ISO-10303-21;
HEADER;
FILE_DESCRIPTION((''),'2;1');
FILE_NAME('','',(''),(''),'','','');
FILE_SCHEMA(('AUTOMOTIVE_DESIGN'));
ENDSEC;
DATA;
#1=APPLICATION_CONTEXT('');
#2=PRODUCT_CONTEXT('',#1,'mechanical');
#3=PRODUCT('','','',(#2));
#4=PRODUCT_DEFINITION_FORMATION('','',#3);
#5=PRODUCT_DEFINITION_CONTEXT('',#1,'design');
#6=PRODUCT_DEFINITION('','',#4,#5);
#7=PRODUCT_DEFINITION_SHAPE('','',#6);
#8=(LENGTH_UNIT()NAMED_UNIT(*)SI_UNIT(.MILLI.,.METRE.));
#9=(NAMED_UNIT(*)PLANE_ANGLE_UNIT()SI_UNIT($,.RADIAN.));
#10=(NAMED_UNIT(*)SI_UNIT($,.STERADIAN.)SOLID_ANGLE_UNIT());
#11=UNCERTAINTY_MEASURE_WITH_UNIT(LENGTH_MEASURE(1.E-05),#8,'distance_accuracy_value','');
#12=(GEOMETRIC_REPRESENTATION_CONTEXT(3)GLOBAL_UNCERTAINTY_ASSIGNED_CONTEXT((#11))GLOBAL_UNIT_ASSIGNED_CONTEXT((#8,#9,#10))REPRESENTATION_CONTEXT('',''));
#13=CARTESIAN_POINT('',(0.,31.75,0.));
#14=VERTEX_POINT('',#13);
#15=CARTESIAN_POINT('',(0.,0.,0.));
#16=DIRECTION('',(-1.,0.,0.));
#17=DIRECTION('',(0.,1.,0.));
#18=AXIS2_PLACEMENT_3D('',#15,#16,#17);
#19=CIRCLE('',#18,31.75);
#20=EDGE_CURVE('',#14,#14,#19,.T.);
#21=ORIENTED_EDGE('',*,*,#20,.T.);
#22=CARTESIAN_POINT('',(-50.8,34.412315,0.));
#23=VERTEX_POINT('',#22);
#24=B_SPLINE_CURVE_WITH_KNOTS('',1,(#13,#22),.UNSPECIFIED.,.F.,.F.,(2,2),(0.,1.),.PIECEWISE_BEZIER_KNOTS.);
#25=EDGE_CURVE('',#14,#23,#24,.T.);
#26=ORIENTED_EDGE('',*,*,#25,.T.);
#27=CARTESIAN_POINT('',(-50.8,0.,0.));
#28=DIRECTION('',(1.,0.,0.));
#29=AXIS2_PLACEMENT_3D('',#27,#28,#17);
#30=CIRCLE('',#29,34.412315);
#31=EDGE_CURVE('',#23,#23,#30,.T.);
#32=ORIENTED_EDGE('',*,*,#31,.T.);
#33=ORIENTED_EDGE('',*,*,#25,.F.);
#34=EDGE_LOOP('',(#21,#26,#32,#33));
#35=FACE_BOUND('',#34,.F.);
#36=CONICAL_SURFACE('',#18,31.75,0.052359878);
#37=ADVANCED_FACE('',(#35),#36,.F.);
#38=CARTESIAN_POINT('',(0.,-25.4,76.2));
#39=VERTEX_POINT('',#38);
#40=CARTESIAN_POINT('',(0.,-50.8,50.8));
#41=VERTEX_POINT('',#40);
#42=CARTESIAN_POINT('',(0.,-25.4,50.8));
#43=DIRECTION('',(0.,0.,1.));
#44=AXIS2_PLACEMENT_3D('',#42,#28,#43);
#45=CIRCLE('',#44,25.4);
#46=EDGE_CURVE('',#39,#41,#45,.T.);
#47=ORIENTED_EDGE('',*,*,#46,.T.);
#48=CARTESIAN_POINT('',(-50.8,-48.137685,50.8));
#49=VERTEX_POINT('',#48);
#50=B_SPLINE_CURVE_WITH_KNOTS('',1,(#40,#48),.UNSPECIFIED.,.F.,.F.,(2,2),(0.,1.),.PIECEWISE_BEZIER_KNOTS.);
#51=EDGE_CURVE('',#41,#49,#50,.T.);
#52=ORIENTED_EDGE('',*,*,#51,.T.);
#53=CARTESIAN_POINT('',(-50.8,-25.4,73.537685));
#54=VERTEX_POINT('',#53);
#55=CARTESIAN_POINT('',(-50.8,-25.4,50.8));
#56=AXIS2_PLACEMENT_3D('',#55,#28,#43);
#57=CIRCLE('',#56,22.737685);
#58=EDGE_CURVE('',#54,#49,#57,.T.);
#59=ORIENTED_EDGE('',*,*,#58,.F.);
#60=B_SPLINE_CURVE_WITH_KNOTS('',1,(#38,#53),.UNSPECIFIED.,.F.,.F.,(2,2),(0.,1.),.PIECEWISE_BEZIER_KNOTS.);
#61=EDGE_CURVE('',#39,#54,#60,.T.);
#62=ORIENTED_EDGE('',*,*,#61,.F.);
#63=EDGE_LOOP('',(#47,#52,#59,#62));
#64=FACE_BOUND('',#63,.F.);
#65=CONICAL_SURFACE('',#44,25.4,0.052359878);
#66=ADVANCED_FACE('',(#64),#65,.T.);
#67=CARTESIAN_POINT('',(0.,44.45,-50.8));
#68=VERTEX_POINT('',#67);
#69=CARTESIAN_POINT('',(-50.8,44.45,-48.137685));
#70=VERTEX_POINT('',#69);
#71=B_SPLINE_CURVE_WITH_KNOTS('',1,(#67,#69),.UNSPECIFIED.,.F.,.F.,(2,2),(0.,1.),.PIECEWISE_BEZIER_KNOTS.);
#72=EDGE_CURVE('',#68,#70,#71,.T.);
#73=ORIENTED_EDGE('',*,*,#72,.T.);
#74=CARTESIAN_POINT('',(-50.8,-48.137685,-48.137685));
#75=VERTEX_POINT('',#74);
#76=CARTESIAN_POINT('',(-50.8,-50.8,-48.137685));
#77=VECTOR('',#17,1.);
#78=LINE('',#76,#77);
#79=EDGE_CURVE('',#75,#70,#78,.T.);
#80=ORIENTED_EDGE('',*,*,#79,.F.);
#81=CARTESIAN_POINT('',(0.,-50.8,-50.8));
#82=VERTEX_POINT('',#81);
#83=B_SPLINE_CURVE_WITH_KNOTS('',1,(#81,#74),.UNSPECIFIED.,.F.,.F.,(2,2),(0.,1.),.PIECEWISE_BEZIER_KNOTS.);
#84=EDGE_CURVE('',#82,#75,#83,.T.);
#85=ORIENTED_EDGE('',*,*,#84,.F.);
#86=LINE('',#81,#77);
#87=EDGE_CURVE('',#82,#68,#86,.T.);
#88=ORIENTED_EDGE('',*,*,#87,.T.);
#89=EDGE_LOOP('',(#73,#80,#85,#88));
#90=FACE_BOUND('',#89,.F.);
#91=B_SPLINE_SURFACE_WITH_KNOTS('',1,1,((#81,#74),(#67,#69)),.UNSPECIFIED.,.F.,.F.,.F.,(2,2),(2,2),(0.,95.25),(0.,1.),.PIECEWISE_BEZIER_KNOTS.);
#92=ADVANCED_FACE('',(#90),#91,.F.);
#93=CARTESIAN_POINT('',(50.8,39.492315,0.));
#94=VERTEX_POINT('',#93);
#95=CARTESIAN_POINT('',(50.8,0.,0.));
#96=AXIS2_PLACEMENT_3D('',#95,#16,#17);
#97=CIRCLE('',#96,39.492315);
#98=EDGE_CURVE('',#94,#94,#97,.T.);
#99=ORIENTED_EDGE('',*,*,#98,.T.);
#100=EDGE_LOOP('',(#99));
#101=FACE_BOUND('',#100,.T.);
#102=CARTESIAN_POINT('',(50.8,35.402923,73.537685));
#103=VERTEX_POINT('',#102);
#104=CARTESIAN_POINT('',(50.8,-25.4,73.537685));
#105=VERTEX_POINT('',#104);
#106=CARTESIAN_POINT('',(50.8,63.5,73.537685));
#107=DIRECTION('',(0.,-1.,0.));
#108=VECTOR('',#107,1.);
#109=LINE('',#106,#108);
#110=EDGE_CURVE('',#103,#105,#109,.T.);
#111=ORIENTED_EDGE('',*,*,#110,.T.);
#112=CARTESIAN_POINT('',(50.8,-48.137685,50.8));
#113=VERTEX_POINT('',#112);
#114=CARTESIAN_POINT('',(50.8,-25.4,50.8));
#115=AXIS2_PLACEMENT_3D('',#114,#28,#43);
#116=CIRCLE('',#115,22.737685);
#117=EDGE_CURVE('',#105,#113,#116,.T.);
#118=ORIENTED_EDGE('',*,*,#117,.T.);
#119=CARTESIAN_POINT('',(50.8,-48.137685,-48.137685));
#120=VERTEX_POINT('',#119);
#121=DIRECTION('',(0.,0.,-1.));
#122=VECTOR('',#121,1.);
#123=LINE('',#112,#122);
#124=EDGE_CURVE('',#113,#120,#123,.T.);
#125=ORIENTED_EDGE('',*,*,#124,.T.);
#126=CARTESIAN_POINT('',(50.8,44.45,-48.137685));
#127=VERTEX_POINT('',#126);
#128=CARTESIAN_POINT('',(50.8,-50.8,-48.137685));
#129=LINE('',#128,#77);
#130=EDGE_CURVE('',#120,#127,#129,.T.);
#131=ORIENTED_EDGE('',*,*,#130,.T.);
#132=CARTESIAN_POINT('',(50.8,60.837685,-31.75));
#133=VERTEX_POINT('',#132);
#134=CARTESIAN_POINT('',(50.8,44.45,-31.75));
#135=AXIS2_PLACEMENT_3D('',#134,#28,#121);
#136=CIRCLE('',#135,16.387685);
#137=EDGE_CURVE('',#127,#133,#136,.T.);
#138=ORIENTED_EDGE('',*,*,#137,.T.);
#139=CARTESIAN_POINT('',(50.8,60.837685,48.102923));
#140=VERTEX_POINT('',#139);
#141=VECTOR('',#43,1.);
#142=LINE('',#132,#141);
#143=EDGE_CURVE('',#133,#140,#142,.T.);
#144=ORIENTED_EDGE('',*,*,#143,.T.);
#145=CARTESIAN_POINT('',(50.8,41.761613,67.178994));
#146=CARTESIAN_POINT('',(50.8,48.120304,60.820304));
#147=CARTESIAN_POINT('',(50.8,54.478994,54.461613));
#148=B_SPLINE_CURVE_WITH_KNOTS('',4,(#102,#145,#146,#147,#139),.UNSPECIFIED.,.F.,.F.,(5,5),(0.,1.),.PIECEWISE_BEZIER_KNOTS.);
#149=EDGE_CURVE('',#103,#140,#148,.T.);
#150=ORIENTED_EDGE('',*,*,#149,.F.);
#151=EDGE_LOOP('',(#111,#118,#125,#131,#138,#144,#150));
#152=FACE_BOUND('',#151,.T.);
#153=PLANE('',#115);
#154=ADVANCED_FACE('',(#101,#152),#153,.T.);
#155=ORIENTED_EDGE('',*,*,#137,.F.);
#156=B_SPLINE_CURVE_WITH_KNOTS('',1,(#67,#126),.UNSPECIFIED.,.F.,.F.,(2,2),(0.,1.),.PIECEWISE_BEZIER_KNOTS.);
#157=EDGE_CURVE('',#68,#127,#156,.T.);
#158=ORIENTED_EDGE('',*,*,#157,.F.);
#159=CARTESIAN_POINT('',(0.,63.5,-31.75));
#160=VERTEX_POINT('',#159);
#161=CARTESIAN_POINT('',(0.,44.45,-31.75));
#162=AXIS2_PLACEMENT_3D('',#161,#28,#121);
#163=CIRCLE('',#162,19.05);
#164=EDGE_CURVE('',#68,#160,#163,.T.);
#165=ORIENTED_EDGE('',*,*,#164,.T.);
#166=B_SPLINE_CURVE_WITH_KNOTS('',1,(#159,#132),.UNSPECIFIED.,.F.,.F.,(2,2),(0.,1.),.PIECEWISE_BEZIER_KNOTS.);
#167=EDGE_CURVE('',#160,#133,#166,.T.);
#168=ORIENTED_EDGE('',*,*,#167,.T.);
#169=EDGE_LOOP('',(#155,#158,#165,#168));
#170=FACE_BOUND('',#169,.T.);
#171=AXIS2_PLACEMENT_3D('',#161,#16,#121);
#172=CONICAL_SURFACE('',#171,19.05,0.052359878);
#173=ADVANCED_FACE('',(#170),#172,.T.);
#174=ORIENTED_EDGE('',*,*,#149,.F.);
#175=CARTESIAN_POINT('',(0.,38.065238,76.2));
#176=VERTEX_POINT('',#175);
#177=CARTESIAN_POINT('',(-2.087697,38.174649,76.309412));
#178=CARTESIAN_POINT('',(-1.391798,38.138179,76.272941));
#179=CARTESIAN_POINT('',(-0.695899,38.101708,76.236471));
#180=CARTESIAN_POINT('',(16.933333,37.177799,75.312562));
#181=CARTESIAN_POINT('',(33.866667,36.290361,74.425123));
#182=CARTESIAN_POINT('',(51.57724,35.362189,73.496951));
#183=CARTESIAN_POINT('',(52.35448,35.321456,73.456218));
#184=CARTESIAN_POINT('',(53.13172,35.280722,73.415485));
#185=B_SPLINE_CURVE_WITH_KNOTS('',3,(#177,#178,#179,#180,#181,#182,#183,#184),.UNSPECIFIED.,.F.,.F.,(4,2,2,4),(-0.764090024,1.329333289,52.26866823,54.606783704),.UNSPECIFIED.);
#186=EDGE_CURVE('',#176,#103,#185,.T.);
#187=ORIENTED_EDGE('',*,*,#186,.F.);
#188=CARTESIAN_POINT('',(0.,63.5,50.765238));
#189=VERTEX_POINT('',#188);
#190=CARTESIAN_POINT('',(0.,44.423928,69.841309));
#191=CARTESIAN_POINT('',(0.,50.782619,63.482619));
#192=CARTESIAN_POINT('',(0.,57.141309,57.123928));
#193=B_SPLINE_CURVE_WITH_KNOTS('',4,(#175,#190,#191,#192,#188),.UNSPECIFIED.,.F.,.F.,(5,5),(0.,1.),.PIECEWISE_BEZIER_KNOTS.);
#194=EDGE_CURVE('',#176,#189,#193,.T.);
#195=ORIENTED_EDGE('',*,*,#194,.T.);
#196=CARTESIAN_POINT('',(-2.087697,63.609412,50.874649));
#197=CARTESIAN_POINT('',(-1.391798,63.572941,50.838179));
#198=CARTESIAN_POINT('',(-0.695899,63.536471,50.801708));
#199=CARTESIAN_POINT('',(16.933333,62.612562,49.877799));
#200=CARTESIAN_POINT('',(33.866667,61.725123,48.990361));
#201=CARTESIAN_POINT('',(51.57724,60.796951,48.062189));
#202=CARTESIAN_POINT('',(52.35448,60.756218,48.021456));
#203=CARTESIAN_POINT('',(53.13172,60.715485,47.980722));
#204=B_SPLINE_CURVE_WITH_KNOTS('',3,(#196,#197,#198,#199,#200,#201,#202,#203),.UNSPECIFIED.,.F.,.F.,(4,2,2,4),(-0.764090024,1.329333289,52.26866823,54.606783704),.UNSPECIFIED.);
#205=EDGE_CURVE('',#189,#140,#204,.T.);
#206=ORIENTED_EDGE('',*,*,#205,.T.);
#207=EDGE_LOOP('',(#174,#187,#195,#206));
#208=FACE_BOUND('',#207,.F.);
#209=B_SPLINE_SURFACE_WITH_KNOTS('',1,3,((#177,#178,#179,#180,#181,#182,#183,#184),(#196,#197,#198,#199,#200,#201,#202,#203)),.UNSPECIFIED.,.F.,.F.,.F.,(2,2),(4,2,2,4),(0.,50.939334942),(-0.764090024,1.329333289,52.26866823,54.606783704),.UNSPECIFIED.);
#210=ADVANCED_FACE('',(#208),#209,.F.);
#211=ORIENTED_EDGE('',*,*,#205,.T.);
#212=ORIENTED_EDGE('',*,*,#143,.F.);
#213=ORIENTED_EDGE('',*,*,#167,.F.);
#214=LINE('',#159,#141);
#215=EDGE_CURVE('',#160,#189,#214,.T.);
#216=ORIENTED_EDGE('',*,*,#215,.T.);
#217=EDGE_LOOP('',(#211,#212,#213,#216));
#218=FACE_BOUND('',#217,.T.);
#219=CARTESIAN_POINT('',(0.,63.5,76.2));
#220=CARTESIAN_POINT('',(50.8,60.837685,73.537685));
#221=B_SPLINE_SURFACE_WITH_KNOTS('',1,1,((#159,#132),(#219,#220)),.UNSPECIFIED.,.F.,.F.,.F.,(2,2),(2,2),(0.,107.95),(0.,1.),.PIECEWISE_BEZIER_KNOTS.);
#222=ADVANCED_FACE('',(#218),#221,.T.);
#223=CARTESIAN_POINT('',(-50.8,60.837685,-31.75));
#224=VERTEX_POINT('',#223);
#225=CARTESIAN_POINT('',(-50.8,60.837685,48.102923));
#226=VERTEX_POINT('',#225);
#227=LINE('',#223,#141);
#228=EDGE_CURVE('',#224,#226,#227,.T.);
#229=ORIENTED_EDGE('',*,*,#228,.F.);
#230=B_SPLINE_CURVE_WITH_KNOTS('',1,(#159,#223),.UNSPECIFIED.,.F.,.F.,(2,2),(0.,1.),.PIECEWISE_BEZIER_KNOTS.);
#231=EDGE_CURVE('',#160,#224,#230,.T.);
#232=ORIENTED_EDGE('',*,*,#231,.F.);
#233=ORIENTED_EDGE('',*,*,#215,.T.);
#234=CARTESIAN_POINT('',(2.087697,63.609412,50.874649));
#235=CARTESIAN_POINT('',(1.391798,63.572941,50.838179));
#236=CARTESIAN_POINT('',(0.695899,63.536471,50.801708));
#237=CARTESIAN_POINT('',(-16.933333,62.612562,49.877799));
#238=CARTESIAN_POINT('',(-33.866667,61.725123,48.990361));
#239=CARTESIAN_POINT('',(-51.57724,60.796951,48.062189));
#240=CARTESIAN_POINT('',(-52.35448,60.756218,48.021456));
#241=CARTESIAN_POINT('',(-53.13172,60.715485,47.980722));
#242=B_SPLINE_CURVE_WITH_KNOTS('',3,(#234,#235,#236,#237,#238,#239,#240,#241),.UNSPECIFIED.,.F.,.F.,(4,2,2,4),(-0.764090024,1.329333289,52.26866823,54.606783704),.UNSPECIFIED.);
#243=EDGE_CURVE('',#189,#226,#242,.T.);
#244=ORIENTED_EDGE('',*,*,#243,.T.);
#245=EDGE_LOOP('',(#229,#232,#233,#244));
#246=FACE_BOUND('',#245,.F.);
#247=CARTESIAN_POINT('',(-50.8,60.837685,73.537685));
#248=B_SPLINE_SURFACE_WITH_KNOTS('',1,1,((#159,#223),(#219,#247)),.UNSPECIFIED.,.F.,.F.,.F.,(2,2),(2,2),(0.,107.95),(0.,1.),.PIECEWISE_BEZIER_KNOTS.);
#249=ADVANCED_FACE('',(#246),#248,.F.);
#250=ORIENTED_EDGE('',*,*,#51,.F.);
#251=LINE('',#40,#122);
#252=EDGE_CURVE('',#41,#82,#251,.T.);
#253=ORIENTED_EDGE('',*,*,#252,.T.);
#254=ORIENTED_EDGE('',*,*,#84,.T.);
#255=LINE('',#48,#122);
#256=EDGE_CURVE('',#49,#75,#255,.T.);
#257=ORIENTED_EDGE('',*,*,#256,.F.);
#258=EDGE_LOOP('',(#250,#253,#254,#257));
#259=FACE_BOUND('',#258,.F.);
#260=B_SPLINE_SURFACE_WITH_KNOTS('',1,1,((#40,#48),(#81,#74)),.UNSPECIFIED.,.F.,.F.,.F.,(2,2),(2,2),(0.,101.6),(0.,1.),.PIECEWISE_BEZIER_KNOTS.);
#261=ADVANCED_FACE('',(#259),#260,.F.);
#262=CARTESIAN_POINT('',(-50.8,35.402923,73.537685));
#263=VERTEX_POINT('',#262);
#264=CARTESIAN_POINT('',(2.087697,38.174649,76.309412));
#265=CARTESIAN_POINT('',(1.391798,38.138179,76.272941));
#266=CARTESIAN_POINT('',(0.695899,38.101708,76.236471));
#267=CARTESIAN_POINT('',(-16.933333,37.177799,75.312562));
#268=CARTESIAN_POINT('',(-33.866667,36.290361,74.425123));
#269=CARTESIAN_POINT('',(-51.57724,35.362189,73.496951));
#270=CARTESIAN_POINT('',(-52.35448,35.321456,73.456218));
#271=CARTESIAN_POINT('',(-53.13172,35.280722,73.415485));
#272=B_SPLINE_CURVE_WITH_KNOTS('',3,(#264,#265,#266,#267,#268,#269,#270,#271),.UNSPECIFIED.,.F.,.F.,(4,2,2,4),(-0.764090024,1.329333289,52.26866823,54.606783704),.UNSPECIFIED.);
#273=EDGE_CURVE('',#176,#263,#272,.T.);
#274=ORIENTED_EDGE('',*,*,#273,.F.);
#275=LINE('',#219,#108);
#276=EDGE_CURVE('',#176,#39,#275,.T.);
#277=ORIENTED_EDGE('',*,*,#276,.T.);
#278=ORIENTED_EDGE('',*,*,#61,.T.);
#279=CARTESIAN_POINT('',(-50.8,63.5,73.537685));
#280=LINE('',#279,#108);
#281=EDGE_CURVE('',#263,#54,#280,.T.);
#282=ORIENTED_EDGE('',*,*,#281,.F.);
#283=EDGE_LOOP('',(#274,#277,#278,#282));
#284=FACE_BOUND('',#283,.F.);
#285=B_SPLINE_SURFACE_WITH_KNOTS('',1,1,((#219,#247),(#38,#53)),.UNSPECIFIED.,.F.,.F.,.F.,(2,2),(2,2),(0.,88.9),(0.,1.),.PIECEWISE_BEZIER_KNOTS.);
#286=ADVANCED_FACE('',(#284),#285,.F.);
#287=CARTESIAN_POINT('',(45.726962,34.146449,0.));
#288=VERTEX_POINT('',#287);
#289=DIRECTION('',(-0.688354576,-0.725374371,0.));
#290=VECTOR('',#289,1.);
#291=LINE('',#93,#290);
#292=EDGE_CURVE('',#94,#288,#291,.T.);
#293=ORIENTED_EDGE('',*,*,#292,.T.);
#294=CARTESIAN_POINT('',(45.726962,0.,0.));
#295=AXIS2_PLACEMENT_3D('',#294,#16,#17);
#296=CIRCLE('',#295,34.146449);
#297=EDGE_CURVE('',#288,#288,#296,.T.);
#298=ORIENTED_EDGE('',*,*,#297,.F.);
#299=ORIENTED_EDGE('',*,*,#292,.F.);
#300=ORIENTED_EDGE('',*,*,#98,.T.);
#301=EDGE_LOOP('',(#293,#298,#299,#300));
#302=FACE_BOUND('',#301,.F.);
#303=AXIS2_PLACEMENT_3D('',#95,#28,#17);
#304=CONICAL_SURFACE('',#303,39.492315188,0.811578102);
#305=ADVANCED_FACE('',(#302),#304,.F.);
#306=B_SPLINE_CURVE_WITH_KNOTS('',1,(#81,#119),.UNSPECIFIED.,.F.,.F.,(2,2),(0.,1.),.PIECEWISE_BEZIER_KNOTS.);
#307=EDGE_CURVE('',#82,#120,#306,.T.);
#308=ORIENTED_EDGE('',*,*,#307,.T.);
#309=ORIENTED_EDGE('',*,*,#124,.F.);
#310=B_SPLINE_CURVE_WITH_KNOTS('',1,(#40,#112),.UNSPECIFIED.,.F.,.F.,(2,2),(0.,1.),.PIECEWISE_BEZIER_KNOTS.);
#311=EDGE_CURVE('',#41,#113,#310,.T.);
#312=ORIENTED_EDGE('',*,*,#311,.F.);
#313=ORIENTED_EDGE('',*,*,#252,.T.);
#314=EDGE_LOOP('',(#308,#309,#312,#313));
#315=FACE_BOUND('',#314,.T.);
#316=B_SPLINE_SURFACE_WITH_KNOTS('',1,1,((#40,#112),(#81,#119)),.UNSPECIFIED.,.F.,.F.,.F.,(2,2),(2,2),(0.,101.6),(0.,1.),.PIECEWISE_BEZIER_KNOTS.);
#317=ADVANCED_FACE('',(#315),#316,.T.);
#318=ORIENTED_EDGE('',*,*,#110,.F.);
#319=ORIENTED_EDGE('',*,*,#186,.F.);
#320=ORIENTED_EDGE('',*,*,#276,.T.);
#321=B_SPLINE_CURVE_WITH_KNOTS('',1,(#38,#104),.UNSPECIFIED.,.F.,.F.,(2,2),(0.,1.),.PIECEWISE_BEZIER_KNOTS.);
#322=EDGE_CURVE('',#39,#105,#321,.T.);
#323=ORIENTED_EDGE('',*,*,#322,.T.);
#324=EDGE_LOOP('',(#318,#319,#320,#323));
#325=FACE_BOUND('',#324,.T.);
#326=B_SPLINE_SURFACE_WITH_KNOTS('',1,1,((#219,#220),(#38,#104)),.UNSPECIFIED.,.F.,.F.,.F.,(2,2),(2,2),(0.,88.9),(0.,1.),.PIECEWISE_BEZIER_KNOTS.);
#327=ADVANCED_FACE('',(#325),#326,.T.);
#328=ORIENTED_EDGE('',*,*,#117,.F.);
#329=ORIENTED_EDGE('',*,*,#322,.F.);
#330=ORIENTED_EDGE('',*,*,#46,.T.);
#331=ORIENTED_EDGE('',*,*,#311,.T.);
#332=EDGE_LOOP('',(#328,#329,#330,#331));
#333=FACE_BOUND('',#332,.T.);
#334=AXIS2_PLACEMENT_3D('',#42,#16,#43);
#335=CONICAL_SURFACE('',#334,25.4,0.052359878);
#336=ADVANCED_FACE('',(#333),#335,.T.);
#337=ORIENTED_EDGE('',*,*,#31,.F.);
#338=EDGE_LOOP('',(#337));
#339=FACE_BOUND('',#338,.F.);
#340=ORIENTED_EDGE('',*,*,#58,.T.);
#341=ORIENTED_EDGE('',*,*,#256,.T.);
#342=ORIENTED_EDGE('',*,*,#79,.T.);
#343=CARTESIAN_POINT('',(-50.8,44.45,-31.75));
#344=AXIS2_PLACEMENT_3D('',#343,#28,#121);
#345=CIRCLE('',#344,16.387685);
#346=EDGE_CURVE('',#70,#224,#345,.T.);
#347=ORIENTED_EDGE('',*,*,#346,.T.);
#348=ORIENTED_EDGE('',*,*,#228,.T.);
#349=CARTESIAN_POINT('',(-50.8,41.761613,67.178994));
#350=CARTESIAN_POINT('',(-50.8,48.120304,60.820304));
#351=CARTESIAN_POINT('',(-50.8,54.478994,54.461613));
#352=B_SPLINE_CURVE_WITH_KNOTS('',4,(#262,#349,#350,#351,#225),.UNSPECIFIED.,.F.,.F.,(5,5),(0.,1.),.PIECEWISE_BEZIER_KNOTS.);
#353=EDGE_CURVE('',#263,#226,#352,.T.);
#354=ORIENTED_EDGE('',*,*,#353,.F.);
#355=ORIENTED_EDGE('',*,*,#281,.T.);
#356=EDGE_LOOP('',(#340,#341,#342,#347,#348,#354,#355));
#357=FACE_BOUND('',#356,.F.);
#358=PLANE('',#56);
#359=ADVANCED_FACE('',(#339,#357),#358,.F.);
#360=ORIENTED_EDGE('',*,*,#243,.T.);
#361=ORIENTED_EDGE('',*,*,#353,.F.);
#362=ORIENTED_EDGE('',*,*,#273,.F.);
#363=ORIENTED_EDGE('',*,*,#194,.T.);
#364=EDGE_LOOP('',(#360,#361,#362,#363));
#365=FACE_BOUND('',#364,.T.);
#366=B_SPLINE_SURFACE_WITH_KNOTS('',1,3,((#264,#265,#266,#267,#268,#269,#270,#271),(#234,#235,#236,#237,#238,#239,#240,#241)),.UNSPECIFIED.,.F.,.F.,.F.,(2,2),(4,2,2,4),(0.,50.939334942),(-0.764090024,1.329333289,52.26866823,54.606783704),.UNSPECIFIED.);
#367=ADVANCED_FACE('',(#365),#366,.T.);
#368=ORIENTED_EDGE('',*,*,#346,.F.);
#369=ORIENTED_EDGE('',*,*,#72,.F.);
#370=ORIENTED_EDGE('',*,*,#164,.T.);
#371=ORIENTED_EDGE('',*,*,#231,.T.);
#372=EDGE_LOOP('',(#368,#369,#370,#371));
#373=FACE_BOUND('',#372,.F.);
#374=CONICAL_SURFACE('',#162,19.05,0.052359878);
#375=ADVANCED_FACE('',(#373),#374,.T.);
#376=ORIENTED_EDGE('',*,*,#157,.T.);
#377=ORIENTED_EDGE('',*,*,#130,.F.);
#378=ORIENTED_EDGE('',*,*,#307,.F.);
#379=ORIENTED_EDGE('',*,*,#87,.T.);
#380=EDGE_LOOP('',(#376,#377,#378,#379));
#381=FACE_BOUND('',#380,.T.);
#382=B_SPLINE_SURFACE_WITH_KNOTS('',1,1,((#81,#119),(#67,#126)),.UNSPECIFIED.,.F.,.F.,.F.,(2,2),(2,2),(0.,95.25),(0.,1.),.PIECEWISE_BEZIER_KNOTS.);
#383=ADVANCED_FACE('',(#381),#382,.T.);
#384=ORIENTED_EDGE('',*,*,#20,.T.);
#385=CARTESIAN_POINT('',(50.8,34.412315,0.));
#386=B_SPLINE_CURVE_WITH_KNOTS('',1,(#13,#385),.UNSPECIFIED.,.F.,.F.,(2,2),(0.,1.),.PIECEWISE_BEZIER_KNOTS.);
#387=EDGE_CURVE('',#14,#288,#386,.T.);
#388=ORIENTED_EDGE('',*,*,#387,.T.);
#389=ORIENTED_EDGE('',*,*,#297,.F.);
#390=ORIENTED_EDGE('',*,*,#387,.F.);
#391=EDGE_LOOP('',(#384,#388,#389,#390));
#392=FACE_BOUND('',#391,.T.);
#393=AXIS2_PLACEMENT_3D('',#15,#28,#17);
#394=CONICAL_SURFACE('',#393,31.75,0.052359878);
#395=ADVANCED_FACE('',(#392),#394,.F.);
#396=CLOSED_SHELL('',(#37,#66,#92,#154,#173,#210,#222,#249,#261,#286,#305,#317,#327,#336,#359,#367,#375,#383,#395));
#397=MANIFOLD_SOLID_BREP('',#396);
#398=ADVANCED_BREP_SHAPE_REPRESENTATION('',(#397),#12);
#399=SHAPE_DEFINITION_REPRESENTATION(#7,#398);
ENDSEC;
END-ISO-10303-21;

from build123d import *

# Parameters (mm, degrees)
F0_R     = 31.75
F1_DEPTH = 50.8
F1_TAPER = 3
F2_SIZE  = 25.4
F3_SIZE  = 5.08


with BuildPart() as f1:
    # F0 (on Right) → F1 (new body, symmetric)
    with BuildSketch(Plane.YZ):
        with BuildLine():
            Line((63.5, 76.2), (-25.4, 76.2))
            ThreePointArc((-25.4, 76.2), (-43.3605122421, 68.7605122421), (-50.8, 50.8))
            Line((-50.8, 50.8), (-50.8, -50.8))
            Line((-50.8, -50.8), (44.45, -50.8))
            ThreePointArc((44.45, -50.8), (57.9203841816, -45.2203841816), (63.5, -31.75))
            Line((63.5, -31.75), (63.5, 76.2))
        make_face()
        Circle(F0_R, mode=Mode.SUBTRACT)
    extrude(amount=F1_DEPTH, both=True, taper=F1_TAPER)

    # F2
    f2_edges = [f1.edges().sort_by_distance(p)[0] for p in [
        (25.4, 62.168842, 74.868842),
        (-25.4, 62.168842, 74.868842),
    ]]
    chamfer(f2_edges, length=F2_SIZE)

    # F3
    f3_edges = [f1.edges().sort_by_distance(p)[0] for p in [
        (50.8, -34.412315, 0),
    ]]
    chamfer(f3_edges, length=F3_SIZE)


solid = f1.part
